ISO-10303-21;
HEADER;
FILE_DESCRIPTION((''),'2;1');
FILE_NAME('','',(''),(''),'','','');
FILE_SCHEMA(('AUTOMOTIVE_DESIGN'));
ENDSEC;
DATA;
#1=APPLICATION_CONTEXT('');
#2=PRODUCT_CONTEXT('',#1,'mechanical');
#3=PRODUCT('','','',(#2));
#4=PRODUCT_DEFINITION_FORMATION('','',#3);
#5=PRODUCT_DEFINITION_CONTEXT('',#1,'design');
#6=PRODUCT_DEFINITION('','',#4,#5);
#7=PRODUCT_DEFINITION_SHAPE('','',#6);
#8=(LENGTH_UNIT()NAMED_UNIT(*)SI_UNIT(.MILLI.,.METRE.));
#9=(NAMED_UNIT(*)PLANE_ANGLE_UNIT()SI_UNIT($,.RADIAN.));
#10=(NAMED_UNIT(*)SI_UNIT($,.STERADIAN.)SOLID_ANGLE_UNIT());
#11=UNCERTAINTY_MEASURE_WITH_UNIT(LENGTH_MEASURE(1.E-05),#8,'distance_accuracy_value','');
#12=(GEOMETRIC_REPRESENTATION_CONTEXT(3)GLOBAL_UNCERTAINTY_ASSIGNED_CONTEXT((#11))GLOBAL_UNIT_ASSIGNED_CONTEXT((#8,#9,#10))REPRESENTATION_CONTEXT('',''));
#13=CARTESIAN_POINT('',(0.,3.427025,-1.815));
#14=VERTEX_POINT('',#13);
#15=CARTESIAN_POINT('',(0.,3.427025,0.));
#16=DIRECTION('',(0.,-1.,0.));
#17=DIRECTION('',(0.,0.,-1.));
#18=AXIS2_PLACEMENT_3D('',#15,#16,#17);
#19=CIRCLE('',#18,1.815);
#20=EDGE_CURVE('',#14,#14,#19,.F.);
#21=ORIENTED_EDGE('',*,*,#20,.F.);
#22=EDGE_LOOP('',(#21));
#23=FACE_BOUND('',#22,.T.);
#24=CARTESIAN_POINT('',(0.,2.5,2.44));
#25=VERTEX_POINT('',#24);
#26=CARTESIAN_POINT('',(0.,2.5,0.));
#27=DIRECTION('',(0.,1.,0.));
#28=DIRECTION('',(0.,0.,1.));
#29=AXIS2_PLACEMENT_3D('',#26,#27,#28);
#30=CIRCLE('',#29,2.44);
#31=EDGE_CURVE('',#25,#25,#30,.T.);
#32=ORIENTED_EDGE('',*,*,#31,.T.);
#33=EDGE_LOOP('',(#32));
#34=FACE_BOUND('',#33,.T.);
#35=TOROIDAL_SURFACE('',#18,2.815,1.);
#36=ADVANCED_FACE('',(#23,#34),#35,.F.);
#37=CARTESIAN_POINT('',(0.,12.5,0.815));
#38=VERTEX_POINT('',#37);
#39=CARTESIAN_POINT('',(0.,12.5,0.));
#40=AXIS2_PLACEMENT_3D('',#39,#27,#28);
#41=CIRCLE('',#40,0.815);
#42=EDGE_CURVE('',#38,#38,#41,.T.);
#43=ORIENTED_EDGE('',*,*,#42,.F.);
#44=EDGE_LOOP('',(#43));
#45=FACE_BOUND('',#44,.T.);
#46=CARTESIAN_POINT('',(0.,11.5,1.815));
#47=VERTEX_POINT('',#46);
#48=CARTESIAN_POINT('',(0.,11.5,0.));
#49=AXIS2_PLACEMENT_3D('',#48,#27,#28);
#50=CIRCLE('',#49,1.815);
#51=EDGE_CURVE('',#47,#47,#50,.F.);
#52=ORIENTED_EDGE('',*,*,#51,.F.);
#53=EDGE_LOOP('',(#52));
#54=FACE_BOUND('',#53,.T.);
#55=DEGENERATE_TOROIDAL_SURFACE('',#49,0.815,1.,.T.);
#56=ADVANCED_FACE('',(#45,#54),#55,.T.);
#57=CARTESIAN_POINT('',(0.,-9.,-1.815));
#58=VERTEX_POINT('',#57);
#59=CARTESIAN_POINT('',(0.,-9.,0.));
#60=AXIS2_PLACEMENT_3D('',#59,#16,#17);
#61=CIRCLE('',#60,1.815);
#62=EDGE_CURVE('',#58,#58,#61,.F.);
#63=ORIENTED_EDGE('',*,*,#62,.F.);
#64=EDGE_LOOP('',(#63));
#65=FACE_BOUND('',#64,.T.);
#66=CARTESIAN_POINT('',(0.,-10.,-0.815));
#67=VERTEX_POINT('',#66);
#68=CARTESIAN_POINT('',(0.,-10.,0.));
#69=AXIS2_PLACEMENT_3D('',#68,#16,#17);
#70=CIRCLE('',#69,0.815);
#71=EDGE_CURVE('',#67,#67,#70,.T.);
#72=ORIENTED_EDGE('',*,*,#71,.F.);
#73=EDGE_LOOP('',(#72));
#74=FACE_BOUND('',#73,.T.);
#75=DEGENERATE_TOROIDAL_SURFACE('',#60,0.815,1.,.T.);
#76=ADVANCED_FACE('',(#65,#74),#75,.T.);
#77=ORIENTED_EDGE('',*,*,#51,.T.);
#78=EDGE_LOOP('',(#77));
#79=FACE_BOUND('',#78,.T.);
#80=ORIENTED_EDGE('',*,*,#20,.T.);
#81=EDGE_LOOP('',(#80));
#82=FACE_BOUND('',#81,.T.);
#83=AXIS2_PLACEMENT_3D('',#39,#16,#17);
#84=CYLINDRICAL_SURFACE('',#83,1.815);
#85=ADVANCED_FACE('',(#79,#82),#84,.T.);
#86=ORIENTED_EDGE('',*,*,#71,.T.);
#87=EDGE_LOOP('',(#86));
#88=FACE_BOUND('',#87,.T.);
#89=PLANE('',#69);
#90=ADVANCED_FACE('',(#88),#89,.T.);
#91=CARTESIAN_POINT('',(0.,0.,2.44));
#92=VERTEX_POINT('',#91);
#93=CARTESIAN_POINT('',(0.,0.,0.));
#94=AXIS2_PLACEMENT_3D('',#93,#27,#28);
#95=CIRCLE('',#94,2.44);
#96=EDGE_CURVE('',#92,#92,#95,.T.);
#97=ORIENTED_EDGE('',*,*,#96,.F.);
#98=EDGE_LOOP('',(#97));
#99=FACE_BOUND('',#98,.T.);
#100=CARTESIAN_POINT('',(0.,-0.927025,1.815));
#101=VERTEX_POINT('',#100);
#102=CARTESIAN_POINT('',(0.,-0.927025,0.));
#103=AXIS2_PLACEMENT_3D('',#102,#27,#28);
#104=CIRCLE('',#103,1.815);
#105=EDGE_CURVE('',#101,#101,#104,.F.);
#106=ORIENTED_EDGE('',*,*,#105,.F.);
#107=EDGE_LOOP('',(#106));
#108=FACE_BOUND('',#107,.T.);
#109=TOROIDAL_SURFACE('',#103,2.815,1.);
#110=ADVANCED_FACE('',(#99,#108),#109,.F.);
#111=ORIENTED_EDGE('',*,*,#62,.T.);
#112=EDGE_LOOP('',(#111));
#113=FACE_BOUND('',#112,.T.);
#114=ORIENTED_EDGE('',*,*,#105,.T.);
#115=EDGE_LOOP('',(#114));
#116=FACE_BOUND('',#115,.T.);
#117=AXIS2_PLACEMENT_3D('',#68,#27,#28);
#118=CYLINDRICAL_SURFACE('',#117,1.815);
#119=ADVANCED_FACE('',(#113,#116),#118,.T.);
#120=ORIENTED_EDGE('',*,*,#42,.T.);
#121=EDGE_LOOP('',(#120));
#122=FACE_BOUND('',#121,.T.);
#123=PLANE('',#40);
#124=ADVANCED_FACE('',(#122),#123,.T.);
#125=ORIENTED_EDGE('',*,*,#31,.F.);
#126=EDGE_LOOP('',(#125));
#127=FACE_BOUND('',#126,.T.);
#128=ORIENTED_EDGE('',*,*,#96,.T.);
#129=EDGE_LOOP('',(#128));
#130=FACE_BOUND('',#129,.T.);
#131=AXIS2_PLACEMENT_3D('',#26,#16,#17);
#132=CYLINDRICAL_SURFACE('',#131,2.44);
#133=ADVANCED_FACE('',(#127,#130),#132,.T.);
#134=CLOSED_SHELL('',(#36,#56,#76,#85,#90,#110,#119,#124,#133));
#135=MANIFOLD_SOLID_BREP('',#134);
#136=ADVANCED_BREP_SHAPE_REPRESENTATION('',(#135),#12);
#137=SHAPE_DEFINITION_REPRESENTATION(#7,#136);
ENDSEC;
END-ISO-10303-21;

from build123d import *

# Parameters (mm, degrees)
CROQUIS1_R              = 2.44
SALIENTE_EXTRUIR1_DEPTH = 2.5
CROQUIS2_R              = 1.815
SALIENTE_EXTRUIR2_DEPTH = 10
SALIENTE_EXTRUIR3_START = 10
CROQUIS3_R              = 1.815
SALIENTE_EXTRUIR3_DEPTH = 10
REDONDEO1_R             = 1
REDONDEO2_R             = 1


with BuildPart() as part:
    # Croquis1 → Saliente-Extruir1 (new body)
    with BuildSketch(Plane(origin=(0, 0, 0), x_dir=(1, 0, 0), z_dir=(0, 1, 0))):
        with Locations(Location((0, 0, 0), (0, 0, 270))):
            Circle(CROQUIS1_R)
    extrude(amount=SALIENTE_EXTRUIR1_DEPTH)

    # Croquis2 → Saliente-Extruir2 (add)
    with BuildSketch(Plane(origin=(0, 2.5, 0), x_dir=(1, 0, 0), z_dir=(0, 1, 0))):
        with Locations(Location((0, 0, 0), (0, 0, 270))):
            Circle(CROQUIS2_R)
    extrude(amount=SALIENTE_EXTRUIR2_DEPTH)

    # Croquis3 → Saliente-Extruir3 (add)
    with BuildSketch(Plane.XZ.offset(SALIENTE_EXTRUIR3_START)):
        with Locations(Location((0, 0, 0), (0, 0, 90))):
            Circle(CROQUIS3_R)
    extrude(amount=-SALIENTE_EXTRUIR3_DEPTH)

    # Redondeo1
    # the kernel refuses this fillet: 1 mm, written as the material it adds along each edge
    with BuildSketch(Plane(origin=(0, 0, 0), x_dir=(0, 0, 1), z_dir=(1, 0, 0))) as redondeo1_piece_1:
        with BuildLine():
            CenterArc((2.815, 0.927024811), REDONDEO1_R, 180, 67.975687163)
            Line((1.815, 0.927024811), (1.795, 0.927024811))
            Line((1.795, 0.927024811), (1.795, 0))
            Line((1.795, 0), (1.815, -0.02))
            ThreePointArc((1.815, -0.02), (2.1275, -0.02), (2.4325, -0.018540496))
            Line((2.4325, -0.018540496), (2.44, 0))
        make_face()
    revolve(axis=Axis((0, 0, 0), (0, -1, 0)))
    with BuildSketch(Plane(origin=(0, 2.5, 0), x_dir=(0, 0, 1), z_dir=(-1, 0, 0))) as redondeo1_piece_2:
        with BuildLine():
            CenterArc((2.815, 0.927024811), REDONDEO1_R, 180, 67.975687163)
            Line((1.815, 0.927024811), (1.795, 0.927024811))
            Line((1.795, 0.927024811), (1.795, 0))
            Line((1.795, 0), (1.815, -0.02))
            ThreePointArc((1.815, -0.02), (2.1275, -0.02), (2.4325, -0.018540496))
            Line((2.4325, -0.018540496), (2.44, 0))
        make_face()
    revolve(axis=Axis((0, 2.5, 0), (0, 1, 0)))

    # Redondeo2
    redondeo2_edges = [part.edges().sort_by_distance(p)[0] for p in [
        (0, -10, -1.815),
        (0, 12.5, -1.815),
    ]]
    fillet(redondeo2_edges, radius=REDONDEO2_R)


solid = part.part
